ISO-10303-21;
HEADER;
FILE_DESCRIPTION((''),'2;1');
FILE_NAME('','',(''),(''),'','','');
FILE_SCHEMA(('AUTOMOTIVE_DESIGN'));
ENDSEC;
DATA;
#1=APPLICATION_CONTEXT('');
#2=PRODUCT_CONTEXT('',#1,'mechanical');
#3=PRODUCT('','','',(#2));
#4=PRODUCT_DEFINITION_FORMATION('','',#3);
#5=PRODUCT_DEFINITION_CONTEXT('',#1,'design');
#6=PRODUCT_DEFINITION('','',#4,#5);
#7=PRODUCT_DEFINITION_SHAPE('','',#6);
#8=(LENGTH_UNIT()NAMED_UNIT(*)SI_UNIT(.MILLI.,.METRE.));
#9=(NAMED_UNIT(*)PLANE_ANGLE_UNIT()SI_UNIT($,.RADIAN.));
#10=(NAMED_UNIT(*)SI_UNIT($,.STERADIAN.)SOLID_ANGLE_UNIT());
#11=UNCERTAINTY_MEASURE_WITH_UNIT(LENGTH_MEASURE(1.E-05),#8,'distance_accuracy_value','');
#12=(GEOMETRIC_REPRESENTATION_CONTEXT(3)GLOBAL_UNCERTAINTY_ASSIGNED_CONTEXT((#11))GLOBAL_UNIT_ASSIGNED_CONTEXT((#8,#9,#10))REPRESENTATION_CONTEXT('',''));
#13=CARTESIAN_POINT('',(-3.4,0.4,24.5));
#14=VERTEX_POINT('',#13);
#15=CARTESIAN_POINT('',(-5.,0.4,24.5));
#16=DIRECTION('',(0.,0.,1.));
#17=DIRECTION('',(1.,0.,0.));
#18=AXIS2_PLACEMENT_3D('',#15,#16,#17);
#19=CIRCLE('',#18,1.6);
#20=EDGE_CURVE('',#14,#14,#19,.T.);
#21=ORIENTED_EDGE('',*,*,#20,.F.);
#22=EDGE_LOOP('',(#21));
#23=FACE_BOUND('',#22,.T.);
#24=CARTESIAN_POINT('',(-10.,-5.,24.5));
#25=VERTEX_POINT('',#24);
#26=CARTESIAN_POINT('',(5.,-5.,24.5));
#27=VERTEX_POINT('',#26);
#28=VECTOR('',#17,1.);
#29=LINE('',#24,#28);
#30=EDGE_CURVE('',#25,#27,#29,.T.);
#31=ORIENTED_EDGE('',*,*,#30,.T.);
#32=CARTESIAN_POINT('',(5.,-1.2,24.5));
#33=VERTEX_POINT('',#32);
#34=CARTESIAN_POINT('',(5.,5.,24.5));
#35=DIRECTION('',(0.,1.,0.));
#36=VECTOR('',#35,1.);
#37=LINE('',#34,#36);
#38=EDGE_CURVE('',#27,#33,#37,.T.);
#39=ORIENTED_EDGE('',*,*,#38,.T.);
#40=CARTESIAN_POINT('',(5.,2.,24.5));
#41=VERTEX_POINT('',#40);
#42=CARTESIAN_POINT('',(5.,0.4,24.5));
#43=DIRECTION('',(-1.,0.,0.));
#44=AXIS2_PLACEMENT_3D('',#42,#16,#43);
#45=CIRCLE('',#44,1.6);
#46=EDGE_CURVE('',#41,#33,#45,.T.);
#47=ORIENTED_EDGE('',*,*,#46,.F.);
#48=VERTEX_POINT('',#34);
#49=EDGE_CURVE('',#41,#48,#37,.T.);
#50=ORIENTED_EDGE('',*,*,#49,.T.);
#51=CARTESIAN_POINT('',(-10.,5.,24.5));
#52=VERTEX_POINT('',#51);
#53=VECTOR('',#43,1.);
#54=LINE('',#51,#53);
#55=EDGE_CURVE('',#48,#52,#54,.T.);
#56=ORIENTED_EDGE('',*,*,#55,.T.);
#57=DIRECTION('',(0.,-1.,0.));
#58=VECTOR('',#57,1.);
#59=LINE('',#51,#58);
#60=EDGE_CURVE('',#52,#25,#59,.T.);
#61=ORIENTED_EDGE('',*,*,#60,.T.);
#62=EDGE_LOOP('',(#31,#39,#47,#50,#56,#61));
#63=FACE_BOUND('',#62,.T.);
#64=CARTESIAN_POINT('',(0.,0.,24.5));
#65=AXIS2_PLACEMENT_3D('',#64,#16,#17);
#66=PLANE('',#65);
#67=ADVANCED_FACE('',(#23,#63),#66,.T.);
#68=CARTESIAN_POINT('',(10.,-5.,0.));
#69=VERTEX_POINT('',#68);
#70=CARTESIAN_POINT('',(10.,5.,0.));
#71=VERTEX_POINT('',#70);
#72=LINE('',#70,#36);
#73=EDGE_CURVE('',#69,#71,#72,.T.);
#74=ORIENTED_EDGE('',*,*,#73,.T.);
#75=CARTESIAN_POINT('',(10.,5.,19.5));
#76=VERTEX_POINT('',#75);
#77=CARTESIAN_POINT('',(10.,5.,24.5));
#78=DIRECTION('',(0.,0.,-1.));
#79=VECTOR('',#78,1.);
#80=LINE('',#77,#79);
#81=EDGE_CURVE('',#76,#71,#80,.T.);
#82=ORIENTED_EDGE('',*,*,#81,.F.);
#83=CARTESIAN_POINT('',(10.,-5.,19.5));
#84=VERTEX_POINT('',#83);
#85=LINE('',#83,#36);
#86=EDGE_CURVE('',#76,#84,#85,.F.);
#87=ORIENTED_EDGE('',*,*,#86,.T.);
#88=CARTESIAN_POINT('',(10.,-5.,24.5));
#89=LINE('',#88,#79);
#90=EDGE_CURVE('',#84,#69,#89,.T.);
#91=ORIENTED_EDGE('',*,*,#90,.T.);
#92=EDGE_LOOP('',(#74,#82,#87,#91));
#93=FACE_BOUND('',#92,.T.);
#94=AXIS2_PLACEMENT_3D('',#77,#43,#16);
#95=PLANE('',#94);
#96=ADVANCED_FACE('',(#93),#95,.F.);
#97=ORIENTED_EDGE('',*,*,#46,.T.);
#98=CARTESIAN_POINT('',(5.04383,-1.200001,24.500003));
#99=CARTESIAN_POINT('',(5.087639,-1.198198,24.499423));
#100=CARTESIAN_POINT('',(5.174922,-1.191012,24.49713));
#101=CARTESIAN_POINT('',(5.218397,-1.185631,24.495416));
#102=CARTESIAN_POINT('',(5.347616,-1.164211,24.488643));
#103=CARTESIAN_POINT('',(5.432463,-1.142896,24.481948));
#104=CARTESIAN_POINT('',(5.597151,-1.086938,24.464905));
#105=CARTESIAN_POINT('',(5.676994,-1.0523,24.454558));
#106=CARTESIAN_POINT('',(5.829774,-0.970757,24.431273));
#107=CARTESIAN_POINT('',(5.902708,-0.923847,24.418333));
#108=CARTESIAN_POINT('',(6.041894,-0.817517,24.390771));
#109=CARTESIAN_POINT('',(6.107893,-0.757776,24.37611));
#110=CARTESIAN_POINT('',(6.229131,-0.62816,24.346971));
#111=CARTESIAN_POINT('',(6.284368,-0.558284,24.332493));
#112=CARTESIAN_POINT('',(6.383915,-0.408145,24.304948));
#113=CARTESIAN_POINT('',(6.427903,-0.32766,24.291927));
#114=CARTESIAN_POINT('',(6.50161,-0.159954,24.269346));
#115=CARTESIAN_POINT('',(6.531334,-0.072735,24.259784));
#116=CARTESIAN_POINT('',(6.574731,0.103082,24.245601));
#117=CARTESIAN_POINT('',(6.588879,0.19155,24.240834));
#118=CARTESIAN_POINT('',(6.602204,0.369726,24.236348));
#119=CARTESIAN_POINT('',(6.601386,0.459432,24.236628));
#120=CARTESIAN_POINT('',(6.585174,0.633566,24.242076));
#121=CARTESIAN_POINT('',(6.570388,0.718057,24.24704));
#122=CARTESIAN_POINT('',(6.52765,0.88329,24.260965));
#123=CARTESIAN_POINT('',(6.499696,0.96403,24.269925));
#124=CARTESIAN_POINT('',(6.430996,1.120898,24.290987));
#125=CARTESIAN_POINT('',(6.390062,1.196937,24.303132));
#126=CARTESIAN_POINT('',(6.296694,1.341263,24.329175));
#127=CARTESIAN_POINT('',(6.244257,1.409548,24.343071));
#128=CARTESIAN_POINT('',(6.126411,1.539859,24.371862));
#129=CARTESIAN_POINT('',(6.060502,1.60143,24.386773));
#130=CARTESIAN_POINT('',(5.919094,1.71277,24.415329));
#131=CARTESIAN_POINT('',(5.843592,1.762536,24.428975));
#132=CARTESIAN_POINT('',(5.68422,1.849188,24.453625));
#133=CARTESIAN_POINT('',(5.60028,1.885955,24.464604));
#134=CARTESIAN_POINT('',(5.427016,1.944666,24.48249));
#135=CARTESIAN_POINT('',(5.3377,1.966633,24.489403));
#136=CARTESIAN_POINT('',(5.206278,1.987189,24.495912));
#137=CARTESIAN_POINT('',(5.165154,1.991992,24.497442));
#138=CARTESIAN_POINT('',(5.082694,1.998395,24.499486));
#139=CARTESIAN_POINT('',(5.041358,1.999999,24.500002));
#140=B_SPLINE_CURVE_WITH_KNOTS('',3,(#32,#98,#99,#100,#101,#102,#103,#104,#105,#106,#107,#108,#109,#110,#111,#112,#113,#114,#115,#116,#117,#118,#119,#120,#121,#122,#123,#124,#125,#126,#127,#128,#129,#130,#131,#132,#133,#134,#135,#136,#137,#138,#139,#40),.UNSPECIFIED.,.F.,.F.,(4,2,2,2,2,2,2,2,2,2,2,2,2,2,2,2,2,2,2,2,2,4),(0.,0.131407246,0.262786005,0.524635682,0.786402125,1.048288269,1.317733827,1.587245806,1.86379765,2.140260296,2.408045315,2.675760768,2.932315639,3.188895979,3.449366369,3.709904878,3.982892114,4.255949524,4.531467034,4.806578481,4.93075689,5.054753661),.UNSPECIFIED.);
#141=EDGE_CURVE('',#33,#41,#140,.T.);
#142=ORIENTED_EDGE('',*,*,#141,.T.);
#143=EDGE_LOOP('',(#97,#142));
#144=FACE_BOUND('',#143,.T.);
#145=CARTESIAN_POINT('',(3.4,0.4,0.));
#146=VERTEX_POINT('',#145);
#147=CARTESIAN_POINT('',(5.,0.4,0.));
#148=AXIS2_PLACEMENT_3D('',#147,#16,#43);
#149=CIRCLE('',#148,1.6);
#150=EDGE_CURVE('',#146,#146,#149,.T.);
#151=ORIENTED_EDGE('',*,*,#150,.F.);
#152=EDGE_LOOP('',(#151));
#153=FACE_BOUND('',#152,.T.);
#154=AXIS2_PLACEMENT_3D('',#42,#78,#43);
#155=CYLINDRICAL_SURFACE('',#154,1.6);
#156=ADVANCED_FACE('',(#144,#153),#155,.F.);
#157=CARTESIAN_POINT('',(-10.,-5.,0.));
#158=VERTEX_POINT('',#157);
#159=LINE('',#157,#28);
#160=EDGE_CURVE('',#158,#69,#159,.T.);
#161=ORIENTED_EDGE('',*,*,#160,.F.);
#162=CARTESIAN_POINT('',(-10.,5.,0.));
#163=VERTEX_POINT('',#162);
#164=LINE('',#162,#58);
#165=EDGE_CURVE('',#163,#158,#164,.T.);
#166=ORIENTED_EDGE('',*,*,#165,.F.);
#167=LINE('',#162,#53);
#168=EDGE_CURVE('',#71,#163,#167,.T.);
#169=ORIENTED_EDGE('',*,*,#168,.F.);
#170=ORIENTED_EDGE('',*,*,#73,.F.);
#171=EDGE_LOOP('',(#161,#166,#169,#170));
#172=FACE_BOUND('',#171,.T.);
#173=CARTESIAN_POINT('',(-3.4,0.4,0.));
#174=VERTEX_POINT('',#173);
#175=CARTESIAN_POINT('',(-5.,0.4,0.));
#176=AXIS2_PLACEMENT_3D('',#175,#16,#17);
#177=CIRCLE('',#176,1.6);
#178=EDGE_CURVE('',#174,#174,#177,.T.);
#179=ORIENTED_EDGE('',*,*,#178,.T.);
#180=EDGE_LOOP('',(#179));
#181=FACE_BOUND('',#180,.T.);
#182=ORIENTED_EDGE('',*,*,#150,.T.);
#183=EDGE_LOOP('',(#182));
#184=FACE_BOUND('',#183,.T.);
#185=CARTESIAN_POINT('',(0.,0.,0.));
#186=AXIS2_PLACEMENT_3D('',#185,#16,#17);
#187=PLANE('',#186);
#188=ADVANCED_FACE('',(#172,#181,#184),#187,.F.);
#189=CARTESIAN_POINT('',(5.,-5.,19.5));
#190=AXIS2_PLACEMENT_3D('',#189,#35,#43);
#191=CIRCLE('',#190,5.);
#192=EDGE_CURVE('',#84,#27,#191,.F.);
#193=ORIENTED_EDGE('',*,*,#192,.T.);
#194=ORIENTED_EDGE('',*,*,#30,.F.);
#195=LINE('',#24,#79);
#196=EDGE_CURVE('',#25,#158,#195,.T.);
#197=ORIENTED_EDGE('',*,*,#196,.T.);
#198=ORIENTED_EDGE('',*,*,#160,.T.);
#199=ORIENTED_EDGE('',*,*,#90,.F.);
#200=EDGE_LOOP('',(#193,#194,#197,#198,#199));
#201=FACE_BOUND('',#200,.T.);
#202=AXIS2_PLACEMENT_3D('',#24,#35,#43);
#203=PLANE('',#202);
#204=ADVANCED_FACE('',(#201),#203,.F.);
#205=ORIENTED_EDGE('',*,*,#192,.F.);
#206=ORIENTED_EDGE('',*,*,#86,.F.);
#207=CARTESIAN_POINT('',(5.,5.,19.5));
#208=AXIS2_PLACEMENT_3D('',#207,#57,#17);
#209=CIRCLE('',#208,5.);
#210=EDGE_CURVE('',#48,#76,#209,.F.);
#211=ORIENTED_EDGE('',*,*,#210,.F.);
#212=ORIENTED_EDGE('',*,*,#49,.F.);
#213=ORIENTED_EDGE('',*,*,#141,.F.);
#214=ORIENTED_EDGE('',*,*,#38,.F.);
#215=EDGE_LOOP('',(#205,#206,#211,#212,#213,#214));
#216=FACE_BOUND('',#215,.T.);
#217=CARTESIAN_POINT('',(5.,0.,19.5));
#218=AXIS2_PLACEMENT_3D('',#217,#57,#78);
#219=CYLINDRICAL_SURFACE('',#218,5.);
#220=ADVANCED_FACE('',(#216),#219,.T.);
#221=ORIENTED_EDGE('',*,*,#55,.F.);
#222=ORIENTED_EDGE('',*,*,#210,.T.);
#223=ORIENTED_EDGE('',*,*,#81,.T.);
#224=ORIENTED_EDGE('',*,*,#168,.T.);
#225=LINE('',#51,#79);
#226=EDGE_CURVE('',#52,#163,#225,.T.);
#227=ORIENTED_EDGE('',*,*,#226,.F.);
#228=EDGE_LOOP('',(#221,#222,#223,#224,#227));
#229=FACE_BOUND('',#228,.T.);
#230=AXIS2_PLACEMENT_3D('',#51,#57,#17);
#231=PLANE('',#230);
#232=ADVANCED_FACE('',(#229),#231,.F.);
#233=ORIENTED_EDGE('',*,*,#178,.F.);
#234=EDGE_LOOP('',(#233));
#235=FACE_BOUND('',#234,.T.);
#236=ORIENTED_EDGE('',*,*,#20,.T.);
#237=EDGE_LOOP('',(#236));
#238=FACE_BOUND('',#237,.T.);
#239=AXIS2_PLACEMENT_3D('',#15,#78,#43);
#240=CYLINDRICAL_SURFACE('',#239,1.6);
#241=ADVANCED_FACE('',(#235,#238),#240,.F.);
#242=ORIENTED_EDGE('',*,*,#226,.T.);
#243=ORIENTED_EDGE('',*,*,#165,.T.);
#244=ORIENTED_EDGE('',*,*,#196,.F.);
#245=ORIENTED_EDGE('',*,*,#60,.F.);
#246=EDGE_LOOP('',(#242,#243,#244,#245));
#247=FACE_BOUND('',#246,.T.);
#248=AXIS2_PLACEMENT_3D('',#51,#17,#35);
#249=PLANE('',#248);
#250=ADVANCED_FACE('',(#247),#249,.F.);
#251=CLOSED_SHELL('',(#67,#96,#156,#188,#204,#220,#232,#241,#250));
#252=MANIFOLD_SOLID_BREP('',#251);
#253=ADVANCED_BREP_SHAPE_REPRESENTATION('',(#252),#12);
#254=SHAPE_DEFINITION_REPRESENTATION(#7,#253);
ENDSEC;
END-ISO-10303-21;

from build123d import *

# Parameters (mm, degrees)
SKETCH_1_W      = 20
SKETCH_1_H      = 10
SKETCH_1_R      = 1.6
EXTRUDE_1_DEPTH = 24.5
FILLET_1_R      = 5


with BuildPart() as part:
    # ｽｹｯﾁ1 → ﾎﾞｽ - 押し出し1 (new body)
    with BuildSketch(Plane.XY):
        Rectangle(SKETCH_1_W, SKETCH_1_H)
        with Locations((-5, 0.4)):
            Circle(SKETCH_1_R, mode=Mode.SUBTRACT)
        with Locations(Location((5, 0.4, 0), (0, 0, 180))):
            Circle(SKETCH_1_R, mode=Mode.SUBTRACT)
    extrude(amount=EXTRUDE_1_DEPTH)

    # ﾌｨﾚｯﾄ1
    # the kernel refuses this fillet: 5 mm, written as the material it takes off along each edge
    with BuildSketch(Plane(origin=(10, 17.5, 24.5), x_dir=(0, 0, -1), z_dir=(0, -1, 0))) as fillet_1_piece_1:
        with BuildLine():
            CenterArc((FILLET_1_R, -FILLET_1_R), FILLET_1_R, 90, 90)
            Line((0, -FILLET_1_R), (0, 0))
            Line((0, 0), (FILLET_1_R, 0))
        make_face()
    extrude(amount=35, mode=Mode.SUBTRACT)


solid = part.part
